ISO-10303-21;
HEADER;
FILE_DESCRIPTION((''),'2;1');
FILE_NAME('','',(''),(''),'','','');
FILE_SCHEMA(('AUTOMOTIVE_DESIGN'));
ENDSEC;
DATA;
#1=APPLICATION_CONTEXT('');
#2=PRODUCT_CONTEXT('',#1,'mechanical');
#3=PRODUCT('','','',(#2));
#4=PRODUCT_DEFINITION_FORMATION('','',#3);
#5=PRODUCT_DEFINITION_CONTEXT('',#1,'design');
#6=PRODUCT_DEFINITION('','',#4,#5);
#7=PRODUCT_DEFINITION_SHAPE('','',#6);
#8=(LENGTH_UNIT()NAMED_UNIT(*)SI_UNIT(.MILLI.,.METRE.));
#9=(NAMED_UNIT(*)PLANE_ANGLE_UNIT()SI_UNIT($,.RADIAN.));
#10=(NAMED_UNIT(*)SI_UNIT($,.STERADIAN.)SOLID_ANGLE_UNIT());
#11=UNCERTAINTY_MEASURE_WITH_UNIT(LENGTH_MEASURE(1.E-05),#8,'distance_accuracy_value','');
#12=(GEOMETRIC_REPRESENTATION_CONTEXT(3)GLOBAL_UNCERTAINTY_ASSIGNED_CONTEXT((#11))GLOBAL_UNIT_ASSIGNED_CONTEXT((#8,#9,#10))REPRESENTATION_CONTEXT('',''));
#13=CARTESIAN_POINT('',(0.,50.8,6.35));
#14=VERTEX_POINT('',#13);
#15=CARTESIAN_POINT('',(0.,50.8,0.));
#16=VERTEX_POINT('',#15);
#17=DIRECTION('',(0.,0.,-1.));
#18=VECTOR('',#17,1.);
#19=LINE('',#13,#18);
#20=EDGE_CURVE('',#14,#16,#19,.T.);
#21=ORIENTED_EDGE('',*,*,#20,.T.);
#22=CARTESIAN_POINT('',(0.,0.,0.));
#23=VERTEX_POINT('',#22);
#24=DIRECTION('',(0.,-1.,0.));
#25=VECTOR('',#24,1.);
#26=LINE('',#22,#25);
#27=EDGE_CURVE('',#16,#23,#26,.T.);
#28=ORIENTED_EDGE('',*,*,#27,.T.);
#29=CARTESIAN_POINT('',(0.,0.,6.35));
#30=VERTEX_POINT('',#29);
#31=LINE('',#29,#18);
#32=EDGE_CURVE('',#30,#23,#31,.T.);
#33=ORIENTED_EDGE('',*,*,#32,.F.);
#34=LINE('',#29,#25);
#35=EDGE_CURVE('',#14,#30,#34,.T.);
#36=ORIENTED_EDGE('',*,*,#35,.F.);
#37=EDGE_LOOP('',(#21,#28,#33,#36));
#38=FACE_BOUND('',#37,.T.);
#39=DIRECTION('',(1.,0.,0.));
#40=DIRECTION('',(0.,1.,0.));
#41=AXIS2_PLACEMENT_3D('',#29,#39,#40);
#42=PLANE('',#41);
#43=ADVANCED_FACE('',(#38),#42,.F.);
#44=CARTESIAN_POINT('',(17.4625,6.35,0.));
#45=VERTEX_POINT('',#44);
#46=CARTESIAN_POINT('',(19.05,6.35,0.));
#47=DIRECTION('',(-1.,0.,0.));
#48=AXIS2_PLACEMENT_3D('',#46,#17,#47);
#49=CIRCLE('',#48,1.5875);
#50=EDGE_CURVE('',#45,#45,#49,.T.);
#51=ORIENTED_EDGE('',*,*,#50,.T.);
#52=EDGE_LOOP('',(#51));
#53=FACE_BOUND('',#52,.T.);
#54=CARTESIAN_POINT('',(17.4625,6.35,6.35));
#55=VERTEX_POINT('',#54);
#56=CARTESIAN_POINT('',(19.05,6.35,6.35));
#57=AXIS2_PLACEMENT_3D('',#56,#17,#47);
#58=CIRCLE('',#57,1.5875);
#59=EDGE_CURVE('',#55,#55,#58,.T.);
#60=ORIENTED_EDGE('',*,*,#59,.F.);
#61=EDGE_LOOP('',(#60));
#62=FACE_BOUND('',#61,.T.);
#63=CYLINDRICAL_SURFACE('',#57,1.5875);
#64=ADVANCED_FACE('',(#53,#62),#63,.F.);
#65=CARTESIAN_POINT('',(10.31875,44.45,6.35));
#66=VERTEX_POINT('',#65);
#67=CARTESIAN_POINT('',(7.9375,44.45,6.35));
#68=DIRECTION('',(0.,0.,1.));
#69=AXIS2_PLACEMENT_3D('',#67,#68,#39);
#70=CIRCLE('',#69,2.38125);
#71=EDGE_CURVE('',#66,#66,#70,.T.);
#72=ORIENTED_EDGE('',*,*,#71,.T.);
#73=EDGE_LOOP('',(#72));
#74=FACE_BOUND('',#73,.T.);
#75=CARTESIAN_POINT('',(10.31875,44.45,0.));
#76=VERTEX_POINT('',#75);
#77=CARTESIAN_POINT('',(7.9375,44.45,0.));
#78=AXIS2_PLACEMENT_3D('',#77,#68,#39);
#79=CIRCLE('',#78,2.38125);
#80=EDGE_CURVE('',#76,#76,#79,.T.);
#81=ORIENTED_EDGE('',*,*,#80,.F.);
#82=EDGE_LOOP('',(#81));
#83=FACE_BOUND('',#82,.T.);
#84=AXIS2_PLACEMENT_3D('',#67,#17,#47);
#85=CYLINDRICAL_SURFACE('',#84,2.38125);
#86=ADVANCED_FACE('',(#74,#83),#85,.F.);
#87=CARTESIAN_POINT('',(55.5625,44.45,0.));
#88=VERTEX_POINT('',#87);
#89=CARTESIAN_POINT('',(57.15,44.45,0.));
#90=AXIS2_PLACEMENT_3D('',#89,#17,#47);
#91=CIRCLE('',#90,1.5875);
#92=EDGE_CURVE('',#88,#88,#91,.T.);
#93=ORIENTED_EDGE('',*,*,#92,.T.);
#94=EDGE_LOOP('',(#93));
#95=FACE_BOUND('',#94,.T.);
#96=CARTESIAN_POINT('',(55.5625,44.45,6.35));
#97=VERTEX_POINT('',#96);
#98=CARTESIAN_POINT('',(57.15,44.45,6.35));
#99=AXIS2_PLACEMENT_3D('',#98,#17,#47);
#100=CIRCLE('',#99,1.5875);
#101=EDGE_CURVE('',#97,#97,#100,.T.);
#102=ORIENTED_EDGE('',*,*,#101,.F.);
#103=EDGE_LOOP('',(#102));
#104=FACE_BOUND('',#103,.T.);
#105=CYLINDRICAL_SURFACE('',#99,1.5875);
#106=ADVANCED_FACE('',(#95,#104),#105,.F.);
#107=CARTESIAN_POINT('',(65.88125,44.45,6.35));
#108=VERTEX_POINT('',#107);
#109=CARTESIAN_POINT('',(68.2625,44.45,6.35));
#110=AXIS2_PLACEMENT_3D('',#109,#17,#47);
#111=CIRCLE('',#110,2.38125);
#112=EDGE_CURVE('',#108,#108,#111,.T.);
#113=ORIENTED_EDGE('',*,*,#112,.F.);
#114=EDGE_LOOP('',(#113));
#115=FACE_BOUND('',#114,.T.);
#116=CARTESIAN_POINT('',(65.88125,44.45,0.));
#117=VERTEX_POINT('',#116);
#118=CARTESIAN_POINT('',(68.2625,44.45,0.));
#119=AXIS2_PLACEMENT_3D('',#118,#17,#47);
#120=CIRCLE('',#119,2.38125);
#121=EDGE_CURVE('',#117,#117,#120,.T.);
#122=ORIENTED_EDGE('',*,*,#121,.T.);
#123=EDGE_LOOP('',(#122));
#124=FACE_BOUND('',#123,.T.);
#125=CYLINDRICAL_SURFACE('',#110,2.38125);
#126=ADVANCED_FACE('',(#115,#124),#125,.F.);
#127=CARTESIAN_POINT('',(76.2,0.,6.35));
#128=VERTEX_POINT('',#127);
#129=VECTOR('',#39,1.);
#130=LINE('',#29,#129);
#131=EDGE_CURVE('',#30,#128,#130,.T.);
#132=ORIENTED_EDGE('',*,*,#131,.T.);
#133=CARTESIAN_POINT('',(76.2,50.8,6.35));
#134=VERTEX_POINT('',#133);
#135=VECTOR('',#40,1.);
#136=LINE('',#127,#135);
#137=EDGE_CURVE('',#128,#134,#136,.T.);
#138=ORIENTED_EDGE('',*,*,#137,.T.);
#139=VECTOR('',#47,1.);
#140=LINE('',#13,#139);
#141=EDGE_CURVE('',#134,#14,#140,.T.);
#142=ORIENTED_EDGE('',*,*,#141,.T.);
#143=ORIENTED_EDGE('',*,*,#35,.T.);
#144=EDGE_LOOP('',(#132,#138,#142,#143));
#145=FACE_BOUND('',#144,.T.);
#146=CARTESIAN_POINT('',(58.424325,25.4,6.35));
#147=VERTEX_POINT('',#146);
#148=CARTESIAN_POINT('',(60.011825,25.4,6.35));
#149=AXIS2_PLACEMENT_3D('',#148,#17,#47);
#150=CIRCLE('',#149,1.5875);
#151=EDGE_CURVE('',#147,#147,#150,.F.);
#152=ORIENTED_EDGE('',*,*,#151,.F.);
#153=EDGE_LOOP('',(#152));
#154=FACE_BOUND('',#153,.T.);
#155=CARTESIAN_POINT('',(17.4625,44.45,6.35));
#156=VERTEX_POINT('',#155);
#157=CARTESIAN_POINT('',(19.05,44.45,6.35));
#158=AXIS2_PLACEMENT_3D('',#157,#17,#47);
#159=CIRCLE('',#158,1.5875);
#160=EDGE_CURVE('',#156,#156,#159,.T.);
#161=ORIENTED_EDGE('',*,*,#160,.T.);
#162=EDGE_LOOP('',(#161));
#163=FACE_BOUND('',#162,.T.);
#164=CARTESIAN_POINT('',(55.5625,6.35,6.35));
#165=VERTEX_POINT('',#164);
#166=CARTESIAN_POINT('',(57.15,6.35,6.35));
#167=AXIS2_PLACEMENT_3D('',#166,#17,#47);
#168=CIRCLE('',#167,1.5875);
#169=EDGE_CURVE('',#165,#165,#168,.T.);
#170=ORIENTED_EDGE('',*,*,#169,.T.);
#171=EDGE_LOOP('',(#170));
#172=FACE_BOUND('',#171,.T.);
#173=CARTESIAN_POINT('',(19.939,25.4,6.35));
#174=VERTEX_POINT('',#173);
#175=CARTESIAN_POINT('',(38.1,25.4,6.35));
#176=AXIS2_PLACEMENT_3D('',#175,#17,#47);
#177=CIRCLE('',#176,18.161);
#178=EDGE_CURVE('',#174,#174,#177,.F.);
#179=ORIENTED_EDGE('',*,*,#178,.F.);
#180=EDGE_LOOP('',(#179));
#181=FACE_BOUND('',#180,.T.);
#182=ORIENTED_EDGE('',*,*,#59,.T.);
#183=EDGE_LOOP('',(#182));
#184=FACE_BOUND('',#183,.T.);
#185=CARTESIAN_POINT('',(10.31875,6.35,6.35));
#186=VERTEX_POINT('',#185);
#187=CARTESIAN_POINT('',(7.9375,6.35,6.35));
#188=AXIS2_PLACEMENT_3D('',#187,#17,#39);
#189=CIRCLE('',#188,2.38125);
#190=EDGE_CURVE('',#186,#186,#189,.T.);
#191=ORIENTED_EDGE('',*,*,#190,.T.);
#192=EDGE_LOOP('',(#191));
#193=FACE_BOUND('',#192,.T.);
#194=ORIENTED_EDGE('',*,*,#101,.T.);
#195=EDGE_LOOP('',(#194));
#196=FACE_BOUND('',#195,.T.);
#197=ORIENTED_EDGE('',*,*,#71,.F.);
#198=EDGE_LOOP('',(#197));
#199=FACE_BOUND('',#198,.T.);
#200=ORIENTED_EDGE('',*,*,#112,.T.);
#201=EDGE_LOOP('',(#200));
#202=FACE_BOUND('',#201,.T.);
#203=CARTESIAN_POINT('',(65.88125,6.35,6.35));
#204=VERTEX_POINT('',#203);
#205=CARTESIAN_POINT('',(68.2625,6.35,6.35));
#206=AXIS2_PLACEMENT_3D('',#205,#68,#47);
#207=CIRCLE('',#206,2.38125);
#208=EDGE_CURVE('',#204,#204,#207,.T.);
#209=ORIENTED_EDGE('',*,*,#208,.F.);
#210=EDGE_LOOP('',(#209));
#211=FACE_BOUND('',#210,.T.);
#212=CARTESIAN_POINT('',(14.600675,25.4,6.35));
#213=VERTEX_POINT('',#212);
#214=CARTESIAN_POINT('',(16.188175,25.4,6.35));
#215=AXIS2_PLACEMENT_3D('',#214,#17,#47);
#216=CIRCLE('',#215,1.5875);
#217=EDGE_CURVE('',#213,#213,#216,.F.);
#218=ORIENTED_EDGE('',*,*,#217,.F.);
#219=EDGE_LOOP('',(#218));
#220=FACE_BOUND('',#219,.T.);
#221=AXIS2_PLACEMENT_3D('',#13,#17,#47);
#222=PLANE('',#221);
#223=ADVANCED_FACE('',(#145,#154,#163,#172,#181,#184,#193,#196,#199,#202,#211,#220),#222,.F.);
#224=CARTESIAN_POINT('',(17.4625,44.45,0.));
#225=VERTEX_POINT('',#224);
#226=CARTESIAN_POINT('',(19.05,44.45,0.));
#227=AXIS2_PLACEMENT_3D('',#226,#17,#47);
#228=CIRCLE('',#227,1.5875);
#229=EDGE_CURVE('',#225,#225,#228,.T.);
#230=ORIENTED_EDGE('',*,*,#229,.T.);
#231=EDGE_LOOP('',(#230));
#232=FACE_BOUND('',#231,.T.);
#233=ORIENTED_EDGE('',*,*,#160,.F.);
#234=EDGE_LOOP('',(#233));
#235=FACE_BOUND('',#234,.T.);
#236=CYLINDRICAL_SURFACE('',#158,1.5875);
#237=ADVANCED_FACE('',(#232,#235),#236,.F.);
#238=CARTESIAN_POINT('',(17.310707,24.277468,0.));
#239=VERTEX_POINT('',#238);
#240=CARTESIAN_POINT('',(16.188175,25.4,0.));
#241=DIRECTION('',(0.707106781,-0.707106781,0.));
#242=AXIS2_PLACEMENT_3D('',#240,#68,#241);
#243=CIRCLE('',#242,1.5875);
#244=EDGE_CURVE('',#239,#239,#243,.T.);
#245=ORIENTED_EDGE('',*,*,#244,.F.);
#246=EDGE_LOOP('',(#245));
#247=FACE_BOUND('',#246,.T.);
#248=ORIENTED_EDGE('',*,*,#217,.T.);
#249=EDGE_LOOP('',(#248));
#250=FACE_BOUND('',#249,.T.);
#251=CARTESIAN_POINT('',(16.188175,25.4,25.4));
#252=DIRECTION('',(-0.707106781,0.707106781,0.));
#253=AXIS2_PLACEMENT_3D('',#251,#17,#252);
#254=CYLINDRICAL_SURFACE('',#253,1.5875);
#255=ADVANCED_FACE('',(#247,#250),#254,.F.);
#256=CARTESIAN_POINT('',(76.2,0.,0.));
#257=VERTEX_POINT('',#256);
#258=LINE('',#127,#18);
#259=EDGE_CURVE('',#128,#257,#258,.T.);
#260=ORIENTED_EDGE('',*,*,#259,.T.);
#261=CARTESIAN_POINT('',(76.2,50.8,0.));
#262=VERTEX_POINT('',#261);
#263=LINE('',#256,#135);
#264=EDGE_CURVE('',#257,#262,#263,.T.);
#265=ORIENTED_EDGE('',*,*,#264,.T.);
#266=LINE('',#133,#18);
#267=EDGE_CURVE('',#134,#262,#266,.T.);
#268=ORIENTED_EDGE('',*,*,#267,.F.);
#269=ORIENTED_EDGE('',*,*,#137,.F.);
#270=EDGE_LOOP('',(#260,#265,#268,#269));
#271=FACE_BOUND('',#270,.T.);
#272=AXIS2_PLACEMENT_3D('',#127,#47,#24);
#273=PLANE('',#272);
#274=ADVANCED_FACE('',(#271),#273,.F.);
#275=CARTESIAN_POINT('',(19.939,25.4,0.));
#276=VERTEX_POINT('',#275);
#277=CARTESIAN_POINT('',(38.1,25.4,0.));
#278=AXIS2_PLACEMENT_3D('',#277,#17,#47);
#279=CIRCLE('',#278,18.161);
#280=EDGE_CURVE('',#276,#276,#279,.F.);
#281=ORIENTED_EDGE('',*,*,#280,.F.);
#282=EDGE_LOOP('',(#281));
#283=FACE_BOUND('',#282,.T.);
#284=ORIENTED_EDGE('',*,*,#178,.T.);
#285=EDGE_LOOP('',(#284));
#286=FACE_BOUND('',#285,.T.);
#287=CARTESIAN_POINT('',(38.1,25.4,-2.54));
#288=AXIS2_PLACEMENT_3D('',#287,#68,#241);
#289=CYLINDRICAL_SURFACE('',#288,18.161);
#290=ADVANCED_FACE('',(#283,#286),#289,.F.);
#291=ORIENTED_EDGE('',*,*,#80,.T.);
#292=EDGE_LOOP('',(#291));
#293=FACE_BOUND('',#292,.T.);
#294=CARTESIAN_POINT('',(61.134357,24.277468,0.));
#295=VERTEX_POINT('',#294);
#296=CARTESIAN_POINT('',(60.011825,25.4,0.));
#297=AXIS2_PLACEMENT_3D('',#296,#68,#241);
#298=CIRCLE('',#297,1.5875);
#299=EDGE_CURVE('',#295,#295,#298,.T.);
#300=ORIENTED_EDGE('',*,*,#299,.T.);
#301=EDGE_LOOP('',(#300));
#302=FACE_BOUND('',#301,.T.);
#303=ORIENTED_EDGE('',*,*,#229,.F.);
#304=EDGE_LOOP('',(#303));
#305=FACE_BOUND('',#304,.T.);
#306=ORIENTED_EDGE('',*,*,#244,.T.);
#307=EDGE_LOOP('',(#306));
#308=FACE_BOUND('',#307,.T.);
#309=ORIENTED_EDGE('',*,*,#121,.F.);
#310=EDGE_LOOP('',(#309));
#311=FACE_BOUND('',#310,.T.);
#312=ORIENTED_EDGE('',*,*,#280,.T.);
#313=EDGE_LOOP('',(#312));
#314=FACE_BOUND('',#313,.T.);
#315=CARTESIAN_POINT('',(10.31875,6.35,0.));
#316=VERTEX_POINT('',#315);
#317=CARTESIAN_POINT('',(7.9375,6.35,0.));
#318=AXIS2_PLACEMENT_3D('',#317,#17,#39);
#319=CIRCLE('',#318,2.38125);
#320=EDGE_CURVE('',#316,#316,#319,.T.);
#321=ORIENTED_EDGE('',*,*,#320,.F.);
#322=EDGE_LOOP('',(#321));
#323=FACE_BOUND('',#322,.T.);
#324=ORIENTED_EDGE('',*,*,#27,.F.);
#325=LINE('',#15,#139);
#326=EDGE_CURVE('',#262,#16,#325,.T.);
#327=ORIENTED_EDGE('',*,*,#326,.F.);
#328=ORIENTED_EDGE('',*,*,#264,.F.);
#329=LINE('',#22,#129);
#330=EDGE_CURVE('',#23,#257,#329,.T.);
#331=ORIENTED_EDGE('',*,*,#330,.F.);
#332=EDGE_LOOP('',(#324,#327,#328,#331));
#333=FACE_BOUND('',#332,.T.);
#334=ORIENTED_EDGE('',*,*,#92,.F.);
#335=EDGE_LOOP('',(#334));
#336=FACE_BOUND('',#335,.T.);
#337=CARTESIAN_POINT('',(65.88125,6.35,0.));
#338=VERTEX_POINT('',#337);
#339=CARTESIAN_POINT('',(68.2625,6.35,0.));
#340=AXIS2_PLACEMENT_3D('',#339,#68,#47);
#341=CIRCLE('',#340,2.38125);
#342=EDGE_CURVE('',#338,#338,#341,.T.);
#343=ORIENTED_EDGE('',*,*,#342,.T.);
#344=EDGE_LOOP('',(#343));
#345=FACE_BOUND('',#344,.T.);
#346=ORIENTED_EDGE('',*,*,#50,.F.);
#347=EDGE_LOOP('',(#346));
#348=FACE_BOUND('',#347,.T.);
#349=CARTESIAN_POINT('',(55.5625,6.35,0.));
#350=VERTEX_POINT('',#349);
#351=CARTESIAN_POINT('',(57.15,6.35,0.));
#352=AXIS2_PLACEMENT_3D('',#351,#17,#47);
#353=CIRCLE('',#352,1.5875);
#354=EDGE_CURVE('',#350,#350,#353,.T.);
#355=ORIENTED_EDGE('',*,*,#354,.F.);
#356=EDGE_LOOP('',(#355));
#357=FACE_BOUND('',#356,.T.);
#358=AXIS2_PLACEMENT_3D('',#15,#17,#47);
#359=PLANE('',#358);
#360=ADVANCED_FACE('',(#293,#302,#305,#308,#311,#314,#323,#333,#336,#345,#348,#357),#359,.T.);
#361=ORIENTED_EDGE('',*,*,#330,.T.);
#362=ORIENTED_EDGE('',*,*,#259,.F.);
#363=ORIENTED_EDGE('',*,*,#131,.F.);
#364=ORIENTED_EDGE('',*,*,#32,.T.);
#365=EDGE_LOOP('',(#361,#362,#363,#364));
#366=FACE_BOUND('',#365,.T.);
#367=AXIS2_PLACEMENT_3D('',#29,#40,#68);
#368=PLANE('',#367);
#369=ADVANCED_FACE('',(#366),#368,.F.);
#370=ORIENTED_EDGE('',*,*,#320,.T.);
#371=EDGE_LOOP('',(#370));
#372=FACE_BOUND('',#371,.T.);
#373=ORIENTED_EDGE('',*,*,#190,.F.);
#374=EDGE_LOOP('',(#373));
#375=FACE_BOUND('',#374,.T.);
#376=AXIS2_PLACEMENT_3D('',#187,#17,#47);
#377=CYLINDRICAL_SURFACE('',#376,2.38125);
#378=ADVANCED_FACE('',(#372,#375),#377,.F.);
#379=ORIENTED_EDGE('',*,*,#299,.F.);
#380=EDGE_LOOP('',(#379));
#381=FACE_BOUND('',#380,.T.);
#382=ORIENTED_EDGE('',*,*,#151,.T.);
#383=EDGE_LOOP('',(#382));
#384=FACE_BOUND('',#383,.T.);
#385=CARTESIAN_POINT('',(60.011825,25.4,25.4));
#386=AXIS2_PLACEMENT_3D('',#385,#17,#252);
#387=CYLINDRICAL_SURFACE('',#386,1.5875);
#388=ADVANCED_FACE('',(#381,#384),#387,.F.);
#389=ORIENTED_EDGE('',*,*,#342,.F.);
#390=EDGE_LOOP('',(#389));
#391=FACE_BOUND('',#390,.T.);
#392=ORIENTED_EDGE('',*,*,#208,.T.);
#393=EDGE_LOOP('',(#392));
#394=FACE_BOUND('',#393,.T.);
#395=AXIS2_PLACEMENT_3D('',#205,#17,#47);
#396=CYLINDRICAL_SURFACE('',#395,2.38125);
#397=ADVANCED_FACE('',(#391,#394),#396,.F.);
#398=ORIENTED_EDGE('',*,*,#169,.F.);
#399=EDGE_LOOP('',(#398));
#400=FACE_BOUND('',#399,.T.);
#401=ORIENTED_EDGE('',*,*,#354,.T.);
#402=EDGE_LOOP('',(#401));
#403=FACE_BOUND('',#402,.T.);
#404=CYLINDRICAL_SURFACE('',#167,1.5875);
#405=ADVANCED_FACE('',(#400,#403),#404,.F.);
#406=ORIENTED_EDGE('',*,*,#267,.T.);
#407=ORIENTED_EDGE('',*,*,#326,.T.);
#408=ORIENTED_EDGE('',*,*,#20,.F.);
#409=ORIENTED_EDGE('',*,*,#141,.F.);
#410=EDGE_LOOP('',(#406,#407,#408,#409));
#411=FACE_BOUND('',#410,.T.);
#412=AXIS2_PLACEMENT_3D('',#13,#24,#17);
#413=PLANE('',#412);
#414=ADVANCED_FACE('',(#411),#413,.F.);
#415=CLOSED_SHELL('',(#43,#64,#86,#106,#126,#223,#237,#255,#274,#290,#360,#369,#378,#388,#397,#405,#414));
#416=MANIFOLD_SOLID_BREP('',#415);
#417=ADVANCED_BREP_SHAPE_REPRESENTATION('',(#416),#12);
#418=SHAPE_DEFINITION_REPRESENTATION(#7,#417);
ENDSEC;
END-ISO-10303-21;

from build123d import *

# Parameters (mm, degrees)
SKETCH1_W               = 76.2
SKETCH1_H               = 50.8
BOSS_EXTRUDE1_DEPTH     = 6.35
CAVITY5_OUTLINE_R       = 18.161
CAVITY5_OUTLINE_R_2     = 1.5875
CAVITY5_DEPTH           = 6.35
SKETCH3_R               = 2.38125
CUT_EXTRUDE1_DEPTH      = 92.800885072
MIRROR2_COPY_1_SKETCH_R = 2.38125
MIRROR2_COPY_1_DEPTH    = 92.800885072
SKETCH4_R               = 1.5875
CUT_EXTRUDE2_DEPTH      = 92.800885072


# Read off the part's stored shape, not the designer's step: Cavity5
with BuildPart() as part:
    # Sketch1 → Boss-Extrude1 (new body)
    with BuildSketch(Plane.XY):
        with Locations((38.1, 25.4)):
            Rectangle(SKETCH1_W, SKETCH1_H)
    extrude(amount=BOSS_EXTRUDE1_DEPTH)

    # Cavity5 outline → Cavity5 (cut)
    with BuildSketch(Plane.XY):
        with Locations((38.1, 25.4)):
            Circle(CAVITY5_OUTLINE_R)
        with Locations((16.188175065, 25.4)):
            Circle(CAVITY5_OUTLINE_R_2)
        with Locations((60.011824935, 25.4)):
            Circle(CAVITY5_OUTLINE_R_2)
    extrude(amount=CAVITY5_DEPTH, mode=Mode.SUBTRACT)

    # Sketch3 → Cut-Extrude1 (cut, through all)
    with BuildSketch(Plane(origin=(0, 0, 0), x_dir=(-1, 0, 0), z_dir=(0, 0, -1))):
        with Locations((-68.2625, 44.45)):
            Circle(SKETCH3_R)
    cut_extrude1 = extrude(amount=-CUT_EXTRUDE1_DEPTH, mode=Mode.SUBTRACT)

    # Mirror1: Cut-Extrude1 across plane
    add(cut_extrude1.mirror(Plane(origin=(38.1, 0, 0), x_dir=(0, 0, 1), z_dir=(1, 0, 0))), mode=Mode.SUBTRACT)

    # Mirror2: Cut-Extrude1 across plane
    add(cut_extrude1.mirror(Plane.ZX.offset(25.4)), mode=Mode.SUBTRACT)

    # Mirror2 copy 1 sketch → Mirror2 copy 1 (cut, through all)
    with BuildSketch(Plane(origin=(76.2, 50.8, 0), x_dir=(1, 0, 0), z_dir=(0, 0, -1))):
        with Locations((-68.2625, 44.45)):
            Circle(MIRROR2_COPY_1_SKETCH_R)
    extrude(amount=-MIRROR2_COPY_1_DEPTH, mode=Mode.SUBTRACT)

    # Sketch4 → Cut-Extrude2 (cut, through all)
    with BuildSketch(Plane(origin=(0, 0, 0), x_dir=(-1, 0, 0), z_dir=(0, 0, -1))):
        with Locations((-19.05, 6.35)):
            Circle(SKETCH4_R)
        with Locations((-57.15, 6.35)):
            Circle(SKETCH4_R)
        with Locations((-19.05, 44.45)):
            Circle(SKETCH4_R)
        with Locations((-57.15, 44.45)):
            Circle(SKETCH4_R)
    extrude(amount=-CUT_EXTRUDE2_DEPTH, mode=Mode.SUBTRACT)


solid = part.part
